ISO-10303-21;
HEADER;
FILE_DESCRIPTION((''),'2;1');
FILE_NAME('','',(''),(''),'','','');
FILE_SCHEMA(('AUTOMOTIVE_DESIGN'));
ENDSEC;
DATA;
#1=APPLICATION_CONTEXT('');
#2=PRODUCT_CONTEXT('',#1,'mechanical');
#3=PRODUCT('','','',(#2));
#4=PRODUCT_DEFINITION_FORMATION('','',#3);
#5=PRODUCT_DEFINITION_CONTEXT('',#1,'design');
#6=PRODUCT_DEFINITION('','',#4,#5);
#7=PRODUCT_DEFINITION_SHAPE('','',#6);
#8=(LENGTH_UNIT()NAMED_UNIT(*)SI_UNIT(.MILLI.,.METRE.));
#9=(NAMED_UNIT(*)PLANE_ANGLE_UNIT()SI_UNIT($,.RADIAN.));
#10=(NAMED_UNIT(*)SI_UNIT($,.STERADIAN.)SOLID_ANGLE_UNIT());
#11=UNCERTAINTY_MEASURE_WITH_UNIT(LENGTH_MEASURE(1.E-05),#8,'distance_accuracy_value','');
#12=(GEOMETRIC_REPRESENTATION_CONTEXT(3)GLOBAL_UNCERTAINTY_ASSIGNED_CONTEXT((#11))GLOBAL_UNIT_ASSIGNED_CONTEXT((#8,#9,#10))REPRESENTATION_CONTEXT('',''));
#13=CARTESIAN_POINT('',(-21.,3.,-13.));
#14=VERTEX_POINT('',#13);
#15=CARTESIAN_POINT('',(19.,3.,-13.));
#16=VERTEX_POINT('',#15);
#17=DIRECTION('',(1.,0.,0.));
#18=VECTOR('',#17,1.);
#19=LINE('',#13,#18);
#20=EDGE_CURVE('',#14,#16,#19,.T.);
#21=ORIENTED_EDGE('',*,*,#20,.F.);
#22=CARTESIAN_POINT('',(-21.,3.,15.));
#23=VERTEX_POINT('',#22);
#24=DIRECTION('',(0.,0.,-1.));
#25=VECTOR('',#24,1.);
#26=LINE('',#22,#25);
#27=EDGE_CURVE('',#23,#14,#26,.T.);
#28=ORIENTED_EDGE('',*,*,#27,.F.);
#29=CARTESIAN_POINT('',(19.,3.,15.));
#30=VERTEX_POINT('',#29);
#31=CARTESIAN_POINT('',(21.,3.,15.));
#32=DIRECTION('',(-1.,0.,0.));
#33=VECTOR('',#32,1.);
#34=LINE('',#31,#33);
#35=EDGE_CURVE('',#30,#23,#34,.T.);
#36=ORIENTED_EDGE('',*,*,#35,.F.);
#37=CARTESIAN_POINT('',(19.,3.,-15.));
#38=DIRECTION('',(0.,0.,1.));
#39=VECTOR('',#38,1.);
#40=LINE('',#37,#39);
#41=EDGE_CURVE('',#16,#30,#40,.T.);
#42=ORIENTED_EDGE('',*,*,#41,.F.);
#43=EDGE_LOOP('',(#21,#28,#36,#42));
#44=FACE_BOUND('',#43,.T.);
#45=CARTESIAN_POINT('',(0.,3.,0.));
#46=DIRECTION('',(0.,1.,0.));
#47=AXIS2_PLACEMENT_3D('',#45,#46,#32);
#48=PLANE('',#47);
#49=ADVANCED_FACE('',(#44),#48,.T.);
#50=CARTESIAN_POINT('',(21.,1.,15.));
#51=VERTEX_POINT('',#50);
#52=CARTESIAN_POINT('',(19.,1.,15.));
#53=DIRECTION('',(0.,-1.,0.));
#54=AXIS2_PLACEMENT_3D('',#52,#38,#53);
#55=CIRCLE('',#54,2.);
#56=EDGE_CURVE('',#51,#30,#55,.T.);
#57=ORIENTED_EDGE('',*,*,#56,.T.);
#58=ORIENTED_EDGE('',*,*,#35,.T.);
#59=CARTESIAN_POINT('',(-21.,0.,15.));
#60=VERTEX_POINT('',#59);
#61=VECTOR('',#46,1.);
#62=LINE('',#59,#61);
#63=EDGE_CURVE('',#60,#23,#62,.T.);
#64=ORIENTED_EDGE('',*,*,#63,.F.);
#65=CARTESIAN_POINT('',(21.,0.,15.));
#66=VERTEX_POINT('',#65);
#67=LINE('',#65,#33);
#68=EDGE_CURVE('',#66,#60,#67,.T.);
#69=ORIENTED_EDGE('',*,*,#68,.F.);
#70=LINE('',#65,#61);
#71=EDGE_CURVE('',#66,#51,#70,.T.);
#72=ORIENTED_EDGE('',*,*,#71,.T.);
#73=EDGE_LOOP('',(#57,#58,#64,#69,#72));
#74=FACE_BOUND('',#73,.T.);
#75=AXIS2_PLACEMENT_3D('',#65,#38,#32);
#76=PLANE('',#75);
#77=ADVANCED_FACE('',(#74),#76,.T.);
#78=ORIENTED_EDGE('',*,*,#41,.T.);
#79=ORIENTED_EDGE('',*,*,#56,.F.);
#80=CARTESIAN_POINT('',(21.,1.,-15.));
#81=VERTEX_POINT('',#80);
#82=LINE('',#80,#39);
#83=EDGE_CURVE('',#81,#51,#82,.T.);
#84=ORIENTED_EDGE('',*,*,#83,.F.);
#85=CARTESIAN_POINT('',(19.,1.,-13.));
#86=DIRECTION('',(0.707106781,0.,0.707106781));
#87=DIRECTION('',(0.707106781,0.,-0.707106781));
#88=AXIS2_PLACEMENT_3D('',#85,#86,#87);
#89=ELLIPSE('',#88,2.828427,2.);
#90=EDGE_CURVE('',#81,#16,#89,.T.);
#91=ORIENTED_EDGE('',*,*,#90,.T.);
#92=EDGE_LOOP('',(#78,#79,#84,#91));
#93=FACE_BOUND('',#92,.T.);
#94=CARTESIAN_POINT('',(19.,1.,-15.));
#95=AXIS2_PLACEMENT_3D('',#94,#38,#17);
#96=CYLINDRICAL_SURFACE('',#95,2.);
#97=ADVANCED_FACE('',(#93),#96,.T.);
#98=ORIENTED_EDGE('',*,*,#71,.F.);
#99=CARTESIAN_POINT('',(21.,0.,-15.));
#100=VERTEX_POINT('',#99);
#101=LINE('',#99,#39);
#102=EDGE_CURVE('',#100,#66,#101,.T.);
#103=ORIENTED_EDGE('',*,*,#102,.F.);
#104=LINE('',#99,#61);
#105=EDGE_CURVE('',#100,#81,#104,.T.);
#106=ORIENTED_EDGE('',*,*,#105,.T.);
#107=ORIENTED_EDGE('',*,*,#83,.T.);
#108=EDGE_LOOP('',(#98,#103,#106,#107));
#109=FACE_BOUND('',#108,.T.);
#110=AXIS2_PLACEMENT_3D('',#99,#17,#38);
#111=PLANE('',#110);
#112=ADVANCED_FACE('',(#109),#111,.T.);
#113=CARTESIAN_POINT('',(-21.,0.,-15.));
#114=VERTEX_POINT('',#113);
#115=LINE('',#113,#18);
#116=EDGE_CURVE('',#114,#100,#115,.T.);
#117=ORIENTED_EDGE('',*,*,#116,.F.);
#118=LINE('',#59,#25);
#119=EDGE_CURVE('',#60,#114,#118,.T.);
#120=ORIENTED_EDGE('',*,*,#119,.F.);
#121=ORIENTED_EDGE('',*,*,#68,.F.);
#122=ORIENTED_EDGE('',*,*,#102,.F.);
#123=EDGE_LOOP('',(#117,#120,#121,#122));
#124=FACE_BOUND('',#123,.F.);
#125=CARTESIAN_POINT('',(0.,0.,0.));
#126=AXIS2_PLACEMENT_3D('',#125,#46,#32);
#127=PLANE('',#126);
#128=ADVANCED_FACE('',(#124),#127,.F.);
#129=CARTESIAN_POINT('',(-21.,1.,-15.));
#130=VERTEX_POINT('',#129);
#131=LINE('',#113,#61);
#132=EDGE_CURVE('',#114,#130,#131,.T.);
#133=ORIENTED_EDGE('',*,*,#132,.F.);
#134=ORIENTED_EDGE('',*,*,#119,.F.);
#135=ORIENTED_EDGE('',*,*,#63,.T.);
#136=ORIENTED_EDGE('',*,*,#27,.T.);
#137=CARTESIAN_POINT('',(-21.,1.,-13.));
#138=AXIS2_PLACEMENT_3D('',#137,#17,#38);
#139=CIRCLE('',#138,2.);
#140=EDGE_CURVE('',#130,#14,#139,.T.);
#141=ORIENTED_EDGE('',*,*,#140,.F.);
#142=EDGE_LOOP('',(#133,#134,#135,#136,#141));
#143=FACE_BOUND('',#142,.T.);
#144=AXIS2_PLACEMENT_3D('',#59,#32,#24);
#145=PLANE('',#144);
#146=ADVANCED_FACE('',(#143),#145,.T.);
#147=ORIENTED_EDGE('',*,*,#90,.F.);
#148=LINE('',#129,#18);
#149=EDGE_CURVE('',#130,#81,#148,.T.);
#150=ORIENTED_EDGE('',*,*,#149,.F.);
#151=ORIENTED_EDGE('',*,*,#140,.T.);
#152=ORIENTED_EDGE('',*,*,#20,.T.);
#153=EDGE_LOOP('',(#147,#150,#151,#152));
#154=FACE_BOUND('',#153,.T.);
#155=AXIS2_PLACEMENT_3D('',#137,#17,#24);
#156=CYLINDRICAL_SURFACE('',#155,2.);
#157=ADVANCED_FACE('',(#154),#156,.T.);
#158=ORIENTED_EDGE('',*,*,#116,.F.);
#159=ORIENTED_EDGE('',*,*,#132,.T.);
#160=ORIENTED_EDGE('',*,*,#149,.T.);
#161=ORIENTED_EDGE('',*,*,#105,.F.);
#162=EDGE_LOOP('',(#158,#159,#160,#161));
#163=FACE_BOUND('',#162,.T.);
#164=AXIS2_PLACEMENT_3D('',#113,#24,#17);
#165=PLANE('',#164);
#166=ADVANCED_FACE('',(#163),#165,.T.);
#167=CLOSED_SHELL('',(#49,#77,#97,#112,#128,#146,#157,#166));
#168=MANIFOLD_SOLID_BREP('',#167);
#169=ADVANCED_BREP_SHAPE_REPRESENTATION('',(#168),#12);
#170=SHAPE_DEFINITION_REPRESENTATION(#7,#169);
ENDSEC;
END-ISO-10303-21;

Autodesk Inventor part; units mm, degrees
ref_plane "YZ Plane" through (0, 0, 0) normal (1, 0, 0) x (0, 1, 0)
ref_plane "XZ Plane" through (0, 0, 0) normal (0, 1, 0) x (-1, 0, 0)
ref_plane "XY Plane" through (0, 0, 0) normal (0, 0, 1) x (1, 0, 0)
sketch "Sketch1" plane through (0, 0, 0) normal (0, 1, 0) x (-1, 0, 0)
  line L0 (21, -15) -> (-21, -15)
  line L1 (-21, -15) -> (-21, 15)
  line L2 (-21, 15) -> (21, 15)
  line L3 (21, 15) -> (21, -15)
  point P0 (0, 0)
  point P1 (0, 0)
  point P2 (-21, 0)
  point P3 (21, 0)
  point P4 (0, -15)
  dimension "d0" = 42
  dimension "d1" = 30
extrude "Extrusion1" add sketch "Sketch1" along normal blind 3
fillet "Fillet1" radius 2 2 edges at (0, 3, -15) (21, 3, 0)
properties part number "Pieza Sensor Ultrasonico"
